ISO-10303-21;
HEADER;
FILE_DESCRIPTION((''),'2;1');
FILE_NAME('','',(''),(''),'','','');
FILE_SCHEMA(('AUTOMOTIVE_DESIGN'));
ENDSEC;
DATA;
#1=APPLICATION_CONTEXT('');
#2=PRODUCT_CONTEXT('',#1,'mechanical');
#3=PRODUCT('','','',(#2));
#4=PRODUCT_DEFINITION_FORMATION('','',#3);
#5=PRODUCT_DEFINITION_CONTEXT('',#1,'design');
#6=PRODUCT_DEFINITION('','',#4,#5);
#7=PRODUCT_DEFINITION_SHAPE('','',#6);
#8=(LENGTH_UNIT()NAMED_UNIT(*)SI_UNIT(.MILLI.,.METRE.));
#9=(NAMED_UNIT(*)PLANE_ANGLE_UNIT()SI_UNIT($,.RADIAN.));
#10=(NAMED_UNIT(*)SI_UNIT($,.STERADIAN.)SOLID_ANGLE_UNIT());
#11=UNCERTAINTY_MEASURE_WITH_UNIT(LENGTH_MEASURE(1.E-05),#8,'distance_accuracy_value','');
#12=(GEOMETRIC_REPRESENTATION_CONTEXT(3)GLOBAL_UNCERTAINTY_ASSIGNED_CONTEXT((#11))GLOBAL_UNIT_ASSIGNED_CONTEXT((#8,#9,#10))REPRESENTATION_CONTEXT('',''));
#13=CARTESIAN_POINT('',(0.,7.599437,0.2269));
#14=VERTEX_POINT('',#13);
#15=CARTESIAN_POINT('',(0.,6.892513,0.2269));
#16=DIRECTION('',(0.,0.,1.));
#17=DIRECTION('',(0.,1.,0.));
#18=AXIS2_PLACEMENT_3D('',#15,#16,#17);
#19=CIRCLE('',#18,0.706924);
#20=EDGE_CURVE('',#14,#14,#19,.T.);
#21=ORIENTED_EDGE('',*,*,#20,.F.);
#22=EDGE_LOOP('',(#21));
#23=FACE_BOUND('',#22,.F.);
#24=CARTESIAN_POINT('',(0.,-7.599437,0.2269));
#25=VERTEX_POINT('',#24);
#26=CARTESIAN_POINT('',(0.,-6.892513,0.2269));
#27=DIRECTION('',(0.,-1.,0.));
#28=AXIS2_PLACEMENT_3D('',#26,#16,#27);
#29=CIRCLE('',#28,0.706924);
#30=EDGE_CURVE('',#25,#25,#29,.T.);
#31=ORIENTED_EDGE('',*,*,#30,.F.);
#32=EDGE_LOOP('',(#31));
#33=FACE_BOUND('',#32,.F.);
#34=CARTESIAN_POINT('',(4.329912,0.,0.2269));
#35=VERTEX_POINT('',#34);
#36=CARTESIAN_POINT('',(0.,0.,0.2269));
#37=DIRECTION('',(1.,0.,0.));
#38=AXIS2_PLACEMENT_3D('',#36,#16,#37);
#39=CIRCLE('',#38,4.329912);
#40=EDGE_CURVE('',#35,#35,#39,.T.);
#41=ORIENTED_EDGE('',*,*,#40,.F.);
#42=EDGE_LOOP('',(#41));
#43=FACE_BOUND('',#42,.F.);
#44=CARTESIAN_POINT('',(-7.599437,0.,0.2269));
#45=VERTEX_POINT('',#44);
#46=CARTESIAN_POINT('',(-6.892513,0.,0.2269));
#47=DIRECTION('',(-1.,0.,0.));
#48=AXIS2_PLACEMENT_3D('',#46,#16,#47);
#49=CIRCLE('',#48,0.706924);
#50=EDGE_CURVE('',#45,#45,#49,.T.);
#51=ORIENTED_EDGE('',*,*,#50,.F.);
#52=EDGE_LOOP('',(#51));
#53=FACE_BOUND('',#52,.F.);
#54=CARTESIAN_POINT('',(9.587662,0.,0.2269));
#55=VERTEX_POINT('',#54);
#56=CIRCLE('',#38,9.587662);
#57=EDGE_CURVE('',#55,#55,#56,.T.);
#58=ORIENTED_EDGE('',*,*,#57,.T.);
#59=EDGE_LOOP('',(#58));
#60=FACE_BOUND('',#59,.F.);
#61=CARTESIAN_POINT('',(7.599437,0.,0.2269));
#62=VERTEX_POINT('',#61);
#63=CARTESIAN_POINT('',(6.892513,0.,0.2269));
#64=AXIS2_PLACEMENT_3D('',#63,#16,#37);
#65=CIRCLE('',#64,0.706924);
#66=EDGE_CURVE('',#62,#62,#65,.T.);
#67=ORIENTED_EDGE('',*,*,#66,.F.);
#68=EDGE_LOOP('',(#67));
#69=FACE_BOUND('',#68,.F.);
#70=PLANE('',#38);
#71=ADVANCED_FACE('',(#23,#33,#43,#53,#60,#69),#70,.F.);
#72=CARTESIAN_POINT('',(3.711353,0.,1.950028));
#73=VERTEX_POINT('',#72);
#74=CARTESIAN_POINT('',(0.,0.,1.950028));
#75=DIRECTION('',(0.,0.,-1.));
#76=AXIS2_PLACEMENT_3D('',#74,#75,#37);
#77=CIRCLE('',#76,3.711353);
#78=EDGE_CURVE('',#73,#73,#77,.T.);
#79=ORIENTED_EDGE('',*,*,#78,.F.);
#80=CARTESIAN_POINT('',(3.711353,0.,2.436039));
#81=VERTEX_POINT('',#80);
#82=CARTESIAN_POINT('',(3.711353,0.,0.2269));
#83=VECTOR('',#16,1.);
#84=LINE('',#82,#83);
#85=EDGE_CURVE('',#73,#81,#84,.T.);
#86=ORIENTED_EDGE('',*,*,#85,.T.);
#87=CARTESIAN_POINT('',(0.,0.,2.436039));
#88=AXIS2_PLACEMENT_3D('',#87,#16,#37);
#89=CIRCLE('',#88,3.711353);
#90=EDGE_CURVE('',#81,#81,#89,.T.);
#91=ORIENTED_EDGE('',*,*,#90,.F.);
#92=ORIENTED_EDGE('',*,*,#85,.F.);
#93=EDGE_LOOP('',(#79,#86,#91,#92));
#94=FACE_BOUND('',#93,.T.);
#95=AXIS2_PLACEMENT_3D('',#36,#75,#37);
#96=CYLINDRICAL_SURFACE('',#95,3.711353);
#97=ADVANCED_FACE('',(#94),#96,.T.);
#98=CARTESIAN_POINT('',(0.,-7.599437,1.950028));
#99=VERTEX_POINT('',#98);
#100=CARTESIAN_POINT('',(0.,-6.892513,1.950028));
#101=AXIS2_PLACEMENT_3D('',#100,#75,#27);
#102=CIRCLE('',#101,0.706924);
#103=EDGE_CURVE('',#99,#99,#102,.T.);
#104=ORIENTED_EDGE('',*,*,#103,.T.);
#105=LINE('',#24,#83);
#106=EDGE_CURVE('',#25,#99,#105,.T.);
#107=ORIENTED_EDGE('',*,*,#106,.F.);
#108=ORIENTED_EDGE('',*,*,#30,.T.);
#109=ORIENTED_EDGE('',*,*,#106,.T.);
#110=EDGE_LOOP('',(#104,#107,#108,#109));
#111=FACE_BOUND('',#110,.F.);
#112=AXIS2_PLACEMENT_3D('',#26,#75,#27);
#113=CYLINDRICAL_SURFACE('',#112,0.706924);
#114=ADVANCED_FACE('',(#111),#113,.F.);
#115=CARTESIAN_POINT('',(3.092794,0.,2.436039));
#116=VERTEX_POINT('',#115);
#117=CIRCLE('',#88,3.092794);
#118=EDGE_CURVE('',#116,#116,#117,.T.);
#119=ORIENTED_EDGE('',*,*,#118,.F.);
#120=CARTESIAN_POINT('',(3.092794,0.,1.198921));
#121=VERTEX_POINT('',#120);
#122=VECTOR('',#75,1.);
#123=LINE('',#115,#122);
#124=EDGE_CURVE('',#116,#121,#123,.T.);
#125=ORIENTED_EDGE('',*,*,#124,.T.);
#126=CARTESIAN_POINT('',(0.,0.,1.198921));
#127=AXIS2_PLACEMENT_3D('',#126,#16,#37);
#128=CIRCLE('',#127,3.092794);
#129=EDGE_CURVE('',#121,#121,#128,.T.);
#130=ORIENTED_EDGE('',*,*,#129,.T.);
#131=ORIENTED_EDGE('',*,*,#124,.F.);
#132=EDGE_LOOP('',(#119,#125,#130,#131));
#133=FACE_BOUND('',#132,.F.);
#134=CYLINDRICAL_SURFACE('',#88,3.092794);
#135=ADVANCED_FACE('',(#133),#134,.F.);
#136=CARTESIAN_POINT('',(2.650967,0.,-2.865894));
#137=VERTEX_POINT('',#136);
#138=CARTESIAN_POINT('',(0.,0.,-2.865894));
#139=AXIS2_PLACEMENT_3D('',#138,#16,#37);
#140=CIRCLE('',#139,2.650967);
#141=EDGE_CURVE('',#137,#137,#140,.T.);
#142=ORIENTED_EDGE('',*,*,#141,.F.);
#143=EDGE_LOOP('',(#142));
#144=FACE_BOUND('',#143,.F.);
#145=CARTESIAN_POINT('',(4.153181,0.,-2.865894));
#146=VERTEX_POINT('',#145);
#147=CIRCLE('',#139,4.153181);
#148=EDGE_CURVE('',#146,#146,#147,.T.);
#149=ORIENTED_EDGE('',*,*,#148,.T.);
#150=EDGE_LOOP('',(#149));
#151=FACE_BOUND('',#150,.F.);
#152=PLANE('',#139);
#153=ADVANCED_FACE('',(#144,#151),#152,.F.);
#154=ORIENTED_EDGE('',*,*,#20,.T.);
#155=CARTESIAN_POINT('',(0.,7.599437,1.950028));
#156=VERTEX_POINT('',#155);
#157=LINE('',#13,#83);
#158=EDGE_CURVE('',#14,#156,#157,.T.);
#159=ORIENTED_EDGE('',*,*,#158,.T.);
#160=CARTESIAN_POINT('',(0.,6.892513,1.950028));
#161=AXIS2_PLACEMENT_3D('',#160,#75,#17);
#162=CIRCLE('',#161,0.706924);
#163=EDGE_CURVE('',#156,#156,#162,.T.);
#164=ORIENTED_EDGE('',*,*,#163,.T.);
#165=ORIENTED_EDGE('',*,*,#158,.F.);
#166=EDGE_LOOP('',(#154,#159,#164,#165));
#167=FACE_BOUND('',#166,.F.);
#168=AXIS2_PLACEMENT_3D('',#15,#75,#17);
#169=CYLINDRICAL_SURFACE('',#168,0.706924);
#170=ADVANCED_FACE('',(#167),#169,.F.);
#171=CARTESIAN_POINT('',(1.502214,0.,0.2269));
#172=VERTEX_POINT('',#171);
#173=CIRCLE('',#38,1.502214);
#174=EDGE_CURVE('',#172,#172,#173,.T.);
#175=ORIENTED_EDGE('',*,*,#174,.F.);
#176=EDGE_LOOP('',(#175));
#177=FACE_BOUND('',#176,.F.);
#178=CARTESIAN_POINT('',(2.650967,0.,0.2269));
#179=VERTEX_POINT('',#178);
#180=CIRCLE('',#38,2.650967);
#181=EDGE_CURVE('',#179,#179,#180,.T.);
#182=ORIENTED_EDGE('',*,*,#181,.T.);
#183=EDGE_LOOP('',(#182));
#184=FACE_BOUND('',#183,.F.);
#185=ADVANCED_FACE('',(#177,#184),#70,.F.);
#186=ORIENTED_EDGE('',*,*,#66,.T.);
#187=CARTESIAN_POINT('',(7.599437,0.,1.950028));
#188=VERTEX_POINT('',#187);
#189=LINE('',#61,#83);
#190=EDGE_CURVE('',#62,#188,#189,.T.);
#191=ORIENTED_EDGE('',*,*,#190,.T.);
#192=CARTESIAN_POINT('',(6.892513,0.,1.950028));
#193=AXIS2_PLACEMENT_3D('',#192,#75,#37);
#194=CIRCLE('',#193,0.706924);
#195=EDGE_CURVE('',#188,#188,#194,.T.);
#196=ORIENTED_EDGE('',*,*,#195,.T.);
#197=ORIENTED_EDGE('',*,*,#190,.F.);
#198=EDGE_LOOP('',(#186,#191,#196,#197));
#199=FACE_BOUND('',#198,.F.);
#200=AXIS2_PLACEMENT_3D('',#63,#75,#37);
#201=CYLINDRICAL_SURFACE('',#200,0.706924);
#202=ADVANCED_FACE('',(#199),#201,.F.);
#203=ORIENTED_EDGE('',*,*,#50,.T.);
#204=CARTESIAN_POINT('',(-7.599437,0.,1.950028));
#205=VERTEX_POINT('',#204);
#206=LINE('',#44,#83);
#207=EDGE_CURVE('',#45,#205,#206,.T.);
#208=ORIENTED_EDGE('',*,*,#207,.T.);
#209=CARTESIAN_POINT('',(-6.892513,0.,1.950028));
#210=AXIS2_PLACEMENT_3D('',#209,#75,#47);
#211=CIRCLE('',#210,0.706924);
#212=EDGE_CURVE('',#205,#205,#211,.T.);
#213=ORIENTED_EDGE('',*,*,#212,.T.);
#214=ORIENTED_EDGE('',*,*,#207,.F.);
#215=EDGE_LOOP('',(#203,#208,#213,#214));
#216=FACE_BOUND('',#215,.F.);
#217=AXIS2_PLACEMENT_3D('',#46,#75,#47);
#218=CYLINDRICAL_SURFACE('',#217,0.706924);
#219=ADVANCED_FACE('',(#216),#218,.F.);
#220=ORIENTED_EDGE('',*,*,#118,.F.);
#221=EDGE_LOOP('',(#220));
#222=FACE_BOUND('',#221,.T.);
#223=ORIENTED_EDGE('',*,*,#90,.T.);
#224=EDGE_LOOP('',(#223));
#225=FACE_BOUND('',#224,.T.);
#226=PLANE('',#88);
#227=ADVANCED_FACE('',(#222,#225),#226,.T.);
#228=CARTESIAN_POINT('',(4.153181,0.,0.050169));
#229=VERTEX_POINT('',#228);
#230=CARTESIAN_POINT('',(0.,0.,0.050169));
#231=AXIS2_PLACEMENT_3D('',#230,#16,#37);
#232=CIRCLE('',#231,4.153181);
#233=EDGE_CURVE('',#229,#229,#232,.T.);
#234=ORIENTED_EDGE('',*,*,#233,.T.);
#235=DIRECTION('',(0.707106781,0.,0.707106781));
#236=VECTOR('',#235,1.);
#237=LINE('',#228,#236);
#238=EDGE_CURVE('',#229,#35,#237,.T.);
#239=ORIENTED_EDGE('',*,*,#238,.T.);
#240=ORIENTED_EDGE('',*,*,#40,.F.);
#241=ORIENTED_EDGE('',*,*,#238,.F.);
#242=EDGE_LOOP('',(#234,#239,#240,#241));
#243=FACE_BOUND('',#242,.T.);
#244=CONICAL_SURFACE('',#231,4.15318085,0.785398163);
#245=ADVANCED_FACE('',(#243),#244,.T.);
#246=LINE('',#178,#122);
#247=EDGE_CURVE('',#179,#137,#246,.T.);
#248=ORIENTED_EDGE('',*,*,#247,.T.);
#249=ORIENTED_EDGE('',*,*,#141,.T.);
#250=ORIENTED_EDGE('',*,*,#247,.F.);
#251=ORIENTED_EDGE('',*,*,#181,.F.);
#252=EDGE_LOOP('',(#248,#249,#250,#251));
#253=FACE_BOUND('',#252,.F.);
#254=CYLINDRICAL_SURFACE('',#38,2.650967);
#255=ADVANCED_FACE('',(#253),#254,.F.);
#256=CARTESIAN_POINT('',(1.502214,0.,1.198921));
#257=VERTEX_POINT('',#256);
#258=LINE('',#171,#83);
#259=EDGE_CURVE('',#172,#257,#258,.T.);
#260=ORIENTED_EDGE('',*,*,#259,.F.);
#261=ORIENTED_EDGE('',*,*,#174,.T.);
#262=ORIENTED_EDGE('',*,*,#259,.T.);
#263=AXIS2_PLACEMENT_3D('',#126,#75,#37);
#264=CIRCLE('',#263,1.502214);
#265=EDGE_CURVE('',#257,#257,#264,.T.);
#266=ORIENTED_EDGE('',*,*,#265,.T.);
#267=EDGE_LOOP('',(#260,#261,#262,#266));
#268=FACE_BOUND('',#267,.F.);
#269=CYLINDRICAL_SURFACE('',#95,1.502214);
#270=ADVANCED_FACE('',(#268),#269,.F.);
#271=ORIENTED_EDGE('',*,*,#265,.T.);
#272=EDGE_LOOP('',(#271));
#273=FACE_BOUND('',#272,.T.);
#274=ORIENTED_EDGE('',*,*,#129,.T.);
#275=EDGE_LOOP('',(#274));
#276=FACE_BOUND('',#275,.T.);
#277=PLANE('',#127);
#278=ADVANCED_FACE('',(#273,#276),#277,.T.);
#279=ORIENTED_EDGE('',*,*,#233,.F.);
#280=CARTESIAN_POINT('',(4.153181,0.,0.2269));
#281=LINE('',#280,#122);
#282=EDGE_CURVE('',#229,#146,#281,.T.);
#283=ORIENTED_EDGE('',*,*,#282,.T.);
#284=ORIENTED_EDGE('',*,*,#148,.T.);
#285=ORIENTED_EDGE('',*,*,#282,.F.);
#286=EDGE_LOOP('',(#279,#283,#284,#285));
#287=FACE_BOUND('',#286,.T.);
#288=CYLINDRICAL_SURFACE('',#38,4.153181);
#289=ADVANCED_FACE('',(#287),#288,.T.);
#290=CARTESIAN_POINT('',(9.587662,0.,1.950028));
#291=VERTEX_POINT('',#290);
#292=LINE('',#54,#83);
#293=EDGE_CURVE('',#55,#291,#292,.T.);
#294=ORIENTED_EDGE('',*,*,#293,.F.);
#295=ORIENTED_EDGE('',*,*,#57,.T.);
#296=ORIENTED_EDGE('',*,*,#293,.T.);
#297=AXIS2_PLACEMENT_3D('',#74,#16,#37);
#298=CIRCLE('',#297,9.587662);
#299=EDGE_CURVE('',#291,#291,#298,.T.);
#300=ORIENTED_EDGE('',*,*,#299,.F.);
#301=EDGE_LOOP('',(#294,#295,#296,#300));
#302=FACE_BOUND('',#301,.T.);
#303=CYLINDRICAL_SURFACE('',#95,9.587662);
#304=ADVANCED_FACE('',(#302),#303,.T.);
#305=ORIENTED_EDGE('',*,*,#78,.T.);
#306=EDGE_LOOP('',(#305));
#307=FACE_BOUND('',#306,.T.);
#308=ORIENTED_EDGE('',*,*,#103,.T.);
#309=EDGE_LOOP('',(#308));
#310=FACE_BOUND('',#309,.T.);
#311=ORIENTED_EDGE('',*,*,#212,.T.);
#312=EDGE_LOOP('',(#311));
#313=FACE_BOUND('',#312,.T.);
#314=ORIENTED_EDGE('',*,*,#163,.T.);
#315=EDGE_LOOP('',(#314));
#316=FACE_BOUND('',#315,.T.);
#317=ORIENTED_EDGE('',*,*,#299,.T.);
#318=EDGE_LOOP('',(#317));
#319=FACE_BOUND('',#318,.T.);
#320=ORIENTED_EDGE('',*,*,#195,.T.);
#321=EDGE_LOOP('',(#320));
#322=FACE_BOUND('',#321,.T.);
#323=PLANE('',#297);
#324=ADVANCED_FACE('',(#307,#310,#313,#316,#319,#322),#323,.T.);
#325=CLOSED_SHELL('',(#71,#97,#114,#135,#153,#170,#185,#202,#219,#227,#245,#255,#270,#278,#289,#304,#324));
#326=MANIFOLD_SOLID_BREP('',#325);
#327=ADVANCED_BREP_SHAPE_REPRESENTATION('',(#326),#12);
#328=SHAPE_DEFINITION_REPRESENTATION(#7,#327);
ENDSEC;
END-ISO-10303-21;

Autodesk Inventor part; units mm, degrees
sketch "スケッチ1" plane through (0, 0, 0) normal (0, 0, 1) x (1, 0, 0)
  circle A0 centre (0, 0) radius 10.85
  dimension "d0" = 21.7
extrude "押し出し1" add sketch "スケッチ1" along normal blind 1.95
sketch "スケッチ2" plane through (0, 0, 0) normal (0, 0, 1) x (1, 0, 0)
  circle A0 centre (0, 0) radius 4.7
  dimension "d3" = 9.4
extrude "押し出し2" add sketch "スケッチ2" against normal blind 3.5
sketch "スケッチ3" plane through (0, 0, 0) normal (0, 0, 1) x (1, 0, 0)
  circle A0 centre (0, 0) radius 3
  dimension "d6" = 6
extrude "押し出し3" cut sketch "スケッチ3" against normal blind 3.5
sketch "スケッチ4" plane through (0, 0, 0) normal (0, 0, 1) x (1, 0, 0)
  circle A0 centre (0, 0) radius 4.2
  dimension "d9" = 8.4
extrude "押し出し4" add sketch "スケッチ4" along normal blind 2.5
sketch "スケッチ5" plane through (0, 0, 2.5) normal (0, 0, 1) x (1, 0, 0)
  circle A0 centre (0, 0) radius 3.5
  dimension "d12" = 7
extrude "押し出し5" cut sketch "スケッチ5" against normal blind 1.4
sketch "スケッチ6" plane through (0, 0, 0) normal (0, 0, 1) x (1, 0, 0)
  circle A0 centre (0, 0) radius 1.7
  dimension "d15" = 3.4
extrude "押し出し6" cut sketch "スケッチ6" along normal through all
sketch "スケッチ7" plane through (0, 0, 0) normal (0, 0, 1) x (1, 0, 0)
  circle A0 centre (7.8, 0) radius 0.8
  point P0 (0, 0)
  dimension "d18" = 1.6
  dimension "d19" = 7.8
extrude "押し出し7" cut sketch "スケッチ7" along normal through all
pattern_circular "円形状パターン1" count 4 over 360 about axis through (0, 0, -10) along (0, 0, 1) of "押し出し7"
chamfer "面取り1" distance 0.2 angle 45 1 edges at (-4.7, 0, 0)
scale "尺度1" factors (0.8836555, 0.8836555, 0.8836555) then translate (0, 0, 0.2269) bodies 1
properties part number "HbServoHorn01"
